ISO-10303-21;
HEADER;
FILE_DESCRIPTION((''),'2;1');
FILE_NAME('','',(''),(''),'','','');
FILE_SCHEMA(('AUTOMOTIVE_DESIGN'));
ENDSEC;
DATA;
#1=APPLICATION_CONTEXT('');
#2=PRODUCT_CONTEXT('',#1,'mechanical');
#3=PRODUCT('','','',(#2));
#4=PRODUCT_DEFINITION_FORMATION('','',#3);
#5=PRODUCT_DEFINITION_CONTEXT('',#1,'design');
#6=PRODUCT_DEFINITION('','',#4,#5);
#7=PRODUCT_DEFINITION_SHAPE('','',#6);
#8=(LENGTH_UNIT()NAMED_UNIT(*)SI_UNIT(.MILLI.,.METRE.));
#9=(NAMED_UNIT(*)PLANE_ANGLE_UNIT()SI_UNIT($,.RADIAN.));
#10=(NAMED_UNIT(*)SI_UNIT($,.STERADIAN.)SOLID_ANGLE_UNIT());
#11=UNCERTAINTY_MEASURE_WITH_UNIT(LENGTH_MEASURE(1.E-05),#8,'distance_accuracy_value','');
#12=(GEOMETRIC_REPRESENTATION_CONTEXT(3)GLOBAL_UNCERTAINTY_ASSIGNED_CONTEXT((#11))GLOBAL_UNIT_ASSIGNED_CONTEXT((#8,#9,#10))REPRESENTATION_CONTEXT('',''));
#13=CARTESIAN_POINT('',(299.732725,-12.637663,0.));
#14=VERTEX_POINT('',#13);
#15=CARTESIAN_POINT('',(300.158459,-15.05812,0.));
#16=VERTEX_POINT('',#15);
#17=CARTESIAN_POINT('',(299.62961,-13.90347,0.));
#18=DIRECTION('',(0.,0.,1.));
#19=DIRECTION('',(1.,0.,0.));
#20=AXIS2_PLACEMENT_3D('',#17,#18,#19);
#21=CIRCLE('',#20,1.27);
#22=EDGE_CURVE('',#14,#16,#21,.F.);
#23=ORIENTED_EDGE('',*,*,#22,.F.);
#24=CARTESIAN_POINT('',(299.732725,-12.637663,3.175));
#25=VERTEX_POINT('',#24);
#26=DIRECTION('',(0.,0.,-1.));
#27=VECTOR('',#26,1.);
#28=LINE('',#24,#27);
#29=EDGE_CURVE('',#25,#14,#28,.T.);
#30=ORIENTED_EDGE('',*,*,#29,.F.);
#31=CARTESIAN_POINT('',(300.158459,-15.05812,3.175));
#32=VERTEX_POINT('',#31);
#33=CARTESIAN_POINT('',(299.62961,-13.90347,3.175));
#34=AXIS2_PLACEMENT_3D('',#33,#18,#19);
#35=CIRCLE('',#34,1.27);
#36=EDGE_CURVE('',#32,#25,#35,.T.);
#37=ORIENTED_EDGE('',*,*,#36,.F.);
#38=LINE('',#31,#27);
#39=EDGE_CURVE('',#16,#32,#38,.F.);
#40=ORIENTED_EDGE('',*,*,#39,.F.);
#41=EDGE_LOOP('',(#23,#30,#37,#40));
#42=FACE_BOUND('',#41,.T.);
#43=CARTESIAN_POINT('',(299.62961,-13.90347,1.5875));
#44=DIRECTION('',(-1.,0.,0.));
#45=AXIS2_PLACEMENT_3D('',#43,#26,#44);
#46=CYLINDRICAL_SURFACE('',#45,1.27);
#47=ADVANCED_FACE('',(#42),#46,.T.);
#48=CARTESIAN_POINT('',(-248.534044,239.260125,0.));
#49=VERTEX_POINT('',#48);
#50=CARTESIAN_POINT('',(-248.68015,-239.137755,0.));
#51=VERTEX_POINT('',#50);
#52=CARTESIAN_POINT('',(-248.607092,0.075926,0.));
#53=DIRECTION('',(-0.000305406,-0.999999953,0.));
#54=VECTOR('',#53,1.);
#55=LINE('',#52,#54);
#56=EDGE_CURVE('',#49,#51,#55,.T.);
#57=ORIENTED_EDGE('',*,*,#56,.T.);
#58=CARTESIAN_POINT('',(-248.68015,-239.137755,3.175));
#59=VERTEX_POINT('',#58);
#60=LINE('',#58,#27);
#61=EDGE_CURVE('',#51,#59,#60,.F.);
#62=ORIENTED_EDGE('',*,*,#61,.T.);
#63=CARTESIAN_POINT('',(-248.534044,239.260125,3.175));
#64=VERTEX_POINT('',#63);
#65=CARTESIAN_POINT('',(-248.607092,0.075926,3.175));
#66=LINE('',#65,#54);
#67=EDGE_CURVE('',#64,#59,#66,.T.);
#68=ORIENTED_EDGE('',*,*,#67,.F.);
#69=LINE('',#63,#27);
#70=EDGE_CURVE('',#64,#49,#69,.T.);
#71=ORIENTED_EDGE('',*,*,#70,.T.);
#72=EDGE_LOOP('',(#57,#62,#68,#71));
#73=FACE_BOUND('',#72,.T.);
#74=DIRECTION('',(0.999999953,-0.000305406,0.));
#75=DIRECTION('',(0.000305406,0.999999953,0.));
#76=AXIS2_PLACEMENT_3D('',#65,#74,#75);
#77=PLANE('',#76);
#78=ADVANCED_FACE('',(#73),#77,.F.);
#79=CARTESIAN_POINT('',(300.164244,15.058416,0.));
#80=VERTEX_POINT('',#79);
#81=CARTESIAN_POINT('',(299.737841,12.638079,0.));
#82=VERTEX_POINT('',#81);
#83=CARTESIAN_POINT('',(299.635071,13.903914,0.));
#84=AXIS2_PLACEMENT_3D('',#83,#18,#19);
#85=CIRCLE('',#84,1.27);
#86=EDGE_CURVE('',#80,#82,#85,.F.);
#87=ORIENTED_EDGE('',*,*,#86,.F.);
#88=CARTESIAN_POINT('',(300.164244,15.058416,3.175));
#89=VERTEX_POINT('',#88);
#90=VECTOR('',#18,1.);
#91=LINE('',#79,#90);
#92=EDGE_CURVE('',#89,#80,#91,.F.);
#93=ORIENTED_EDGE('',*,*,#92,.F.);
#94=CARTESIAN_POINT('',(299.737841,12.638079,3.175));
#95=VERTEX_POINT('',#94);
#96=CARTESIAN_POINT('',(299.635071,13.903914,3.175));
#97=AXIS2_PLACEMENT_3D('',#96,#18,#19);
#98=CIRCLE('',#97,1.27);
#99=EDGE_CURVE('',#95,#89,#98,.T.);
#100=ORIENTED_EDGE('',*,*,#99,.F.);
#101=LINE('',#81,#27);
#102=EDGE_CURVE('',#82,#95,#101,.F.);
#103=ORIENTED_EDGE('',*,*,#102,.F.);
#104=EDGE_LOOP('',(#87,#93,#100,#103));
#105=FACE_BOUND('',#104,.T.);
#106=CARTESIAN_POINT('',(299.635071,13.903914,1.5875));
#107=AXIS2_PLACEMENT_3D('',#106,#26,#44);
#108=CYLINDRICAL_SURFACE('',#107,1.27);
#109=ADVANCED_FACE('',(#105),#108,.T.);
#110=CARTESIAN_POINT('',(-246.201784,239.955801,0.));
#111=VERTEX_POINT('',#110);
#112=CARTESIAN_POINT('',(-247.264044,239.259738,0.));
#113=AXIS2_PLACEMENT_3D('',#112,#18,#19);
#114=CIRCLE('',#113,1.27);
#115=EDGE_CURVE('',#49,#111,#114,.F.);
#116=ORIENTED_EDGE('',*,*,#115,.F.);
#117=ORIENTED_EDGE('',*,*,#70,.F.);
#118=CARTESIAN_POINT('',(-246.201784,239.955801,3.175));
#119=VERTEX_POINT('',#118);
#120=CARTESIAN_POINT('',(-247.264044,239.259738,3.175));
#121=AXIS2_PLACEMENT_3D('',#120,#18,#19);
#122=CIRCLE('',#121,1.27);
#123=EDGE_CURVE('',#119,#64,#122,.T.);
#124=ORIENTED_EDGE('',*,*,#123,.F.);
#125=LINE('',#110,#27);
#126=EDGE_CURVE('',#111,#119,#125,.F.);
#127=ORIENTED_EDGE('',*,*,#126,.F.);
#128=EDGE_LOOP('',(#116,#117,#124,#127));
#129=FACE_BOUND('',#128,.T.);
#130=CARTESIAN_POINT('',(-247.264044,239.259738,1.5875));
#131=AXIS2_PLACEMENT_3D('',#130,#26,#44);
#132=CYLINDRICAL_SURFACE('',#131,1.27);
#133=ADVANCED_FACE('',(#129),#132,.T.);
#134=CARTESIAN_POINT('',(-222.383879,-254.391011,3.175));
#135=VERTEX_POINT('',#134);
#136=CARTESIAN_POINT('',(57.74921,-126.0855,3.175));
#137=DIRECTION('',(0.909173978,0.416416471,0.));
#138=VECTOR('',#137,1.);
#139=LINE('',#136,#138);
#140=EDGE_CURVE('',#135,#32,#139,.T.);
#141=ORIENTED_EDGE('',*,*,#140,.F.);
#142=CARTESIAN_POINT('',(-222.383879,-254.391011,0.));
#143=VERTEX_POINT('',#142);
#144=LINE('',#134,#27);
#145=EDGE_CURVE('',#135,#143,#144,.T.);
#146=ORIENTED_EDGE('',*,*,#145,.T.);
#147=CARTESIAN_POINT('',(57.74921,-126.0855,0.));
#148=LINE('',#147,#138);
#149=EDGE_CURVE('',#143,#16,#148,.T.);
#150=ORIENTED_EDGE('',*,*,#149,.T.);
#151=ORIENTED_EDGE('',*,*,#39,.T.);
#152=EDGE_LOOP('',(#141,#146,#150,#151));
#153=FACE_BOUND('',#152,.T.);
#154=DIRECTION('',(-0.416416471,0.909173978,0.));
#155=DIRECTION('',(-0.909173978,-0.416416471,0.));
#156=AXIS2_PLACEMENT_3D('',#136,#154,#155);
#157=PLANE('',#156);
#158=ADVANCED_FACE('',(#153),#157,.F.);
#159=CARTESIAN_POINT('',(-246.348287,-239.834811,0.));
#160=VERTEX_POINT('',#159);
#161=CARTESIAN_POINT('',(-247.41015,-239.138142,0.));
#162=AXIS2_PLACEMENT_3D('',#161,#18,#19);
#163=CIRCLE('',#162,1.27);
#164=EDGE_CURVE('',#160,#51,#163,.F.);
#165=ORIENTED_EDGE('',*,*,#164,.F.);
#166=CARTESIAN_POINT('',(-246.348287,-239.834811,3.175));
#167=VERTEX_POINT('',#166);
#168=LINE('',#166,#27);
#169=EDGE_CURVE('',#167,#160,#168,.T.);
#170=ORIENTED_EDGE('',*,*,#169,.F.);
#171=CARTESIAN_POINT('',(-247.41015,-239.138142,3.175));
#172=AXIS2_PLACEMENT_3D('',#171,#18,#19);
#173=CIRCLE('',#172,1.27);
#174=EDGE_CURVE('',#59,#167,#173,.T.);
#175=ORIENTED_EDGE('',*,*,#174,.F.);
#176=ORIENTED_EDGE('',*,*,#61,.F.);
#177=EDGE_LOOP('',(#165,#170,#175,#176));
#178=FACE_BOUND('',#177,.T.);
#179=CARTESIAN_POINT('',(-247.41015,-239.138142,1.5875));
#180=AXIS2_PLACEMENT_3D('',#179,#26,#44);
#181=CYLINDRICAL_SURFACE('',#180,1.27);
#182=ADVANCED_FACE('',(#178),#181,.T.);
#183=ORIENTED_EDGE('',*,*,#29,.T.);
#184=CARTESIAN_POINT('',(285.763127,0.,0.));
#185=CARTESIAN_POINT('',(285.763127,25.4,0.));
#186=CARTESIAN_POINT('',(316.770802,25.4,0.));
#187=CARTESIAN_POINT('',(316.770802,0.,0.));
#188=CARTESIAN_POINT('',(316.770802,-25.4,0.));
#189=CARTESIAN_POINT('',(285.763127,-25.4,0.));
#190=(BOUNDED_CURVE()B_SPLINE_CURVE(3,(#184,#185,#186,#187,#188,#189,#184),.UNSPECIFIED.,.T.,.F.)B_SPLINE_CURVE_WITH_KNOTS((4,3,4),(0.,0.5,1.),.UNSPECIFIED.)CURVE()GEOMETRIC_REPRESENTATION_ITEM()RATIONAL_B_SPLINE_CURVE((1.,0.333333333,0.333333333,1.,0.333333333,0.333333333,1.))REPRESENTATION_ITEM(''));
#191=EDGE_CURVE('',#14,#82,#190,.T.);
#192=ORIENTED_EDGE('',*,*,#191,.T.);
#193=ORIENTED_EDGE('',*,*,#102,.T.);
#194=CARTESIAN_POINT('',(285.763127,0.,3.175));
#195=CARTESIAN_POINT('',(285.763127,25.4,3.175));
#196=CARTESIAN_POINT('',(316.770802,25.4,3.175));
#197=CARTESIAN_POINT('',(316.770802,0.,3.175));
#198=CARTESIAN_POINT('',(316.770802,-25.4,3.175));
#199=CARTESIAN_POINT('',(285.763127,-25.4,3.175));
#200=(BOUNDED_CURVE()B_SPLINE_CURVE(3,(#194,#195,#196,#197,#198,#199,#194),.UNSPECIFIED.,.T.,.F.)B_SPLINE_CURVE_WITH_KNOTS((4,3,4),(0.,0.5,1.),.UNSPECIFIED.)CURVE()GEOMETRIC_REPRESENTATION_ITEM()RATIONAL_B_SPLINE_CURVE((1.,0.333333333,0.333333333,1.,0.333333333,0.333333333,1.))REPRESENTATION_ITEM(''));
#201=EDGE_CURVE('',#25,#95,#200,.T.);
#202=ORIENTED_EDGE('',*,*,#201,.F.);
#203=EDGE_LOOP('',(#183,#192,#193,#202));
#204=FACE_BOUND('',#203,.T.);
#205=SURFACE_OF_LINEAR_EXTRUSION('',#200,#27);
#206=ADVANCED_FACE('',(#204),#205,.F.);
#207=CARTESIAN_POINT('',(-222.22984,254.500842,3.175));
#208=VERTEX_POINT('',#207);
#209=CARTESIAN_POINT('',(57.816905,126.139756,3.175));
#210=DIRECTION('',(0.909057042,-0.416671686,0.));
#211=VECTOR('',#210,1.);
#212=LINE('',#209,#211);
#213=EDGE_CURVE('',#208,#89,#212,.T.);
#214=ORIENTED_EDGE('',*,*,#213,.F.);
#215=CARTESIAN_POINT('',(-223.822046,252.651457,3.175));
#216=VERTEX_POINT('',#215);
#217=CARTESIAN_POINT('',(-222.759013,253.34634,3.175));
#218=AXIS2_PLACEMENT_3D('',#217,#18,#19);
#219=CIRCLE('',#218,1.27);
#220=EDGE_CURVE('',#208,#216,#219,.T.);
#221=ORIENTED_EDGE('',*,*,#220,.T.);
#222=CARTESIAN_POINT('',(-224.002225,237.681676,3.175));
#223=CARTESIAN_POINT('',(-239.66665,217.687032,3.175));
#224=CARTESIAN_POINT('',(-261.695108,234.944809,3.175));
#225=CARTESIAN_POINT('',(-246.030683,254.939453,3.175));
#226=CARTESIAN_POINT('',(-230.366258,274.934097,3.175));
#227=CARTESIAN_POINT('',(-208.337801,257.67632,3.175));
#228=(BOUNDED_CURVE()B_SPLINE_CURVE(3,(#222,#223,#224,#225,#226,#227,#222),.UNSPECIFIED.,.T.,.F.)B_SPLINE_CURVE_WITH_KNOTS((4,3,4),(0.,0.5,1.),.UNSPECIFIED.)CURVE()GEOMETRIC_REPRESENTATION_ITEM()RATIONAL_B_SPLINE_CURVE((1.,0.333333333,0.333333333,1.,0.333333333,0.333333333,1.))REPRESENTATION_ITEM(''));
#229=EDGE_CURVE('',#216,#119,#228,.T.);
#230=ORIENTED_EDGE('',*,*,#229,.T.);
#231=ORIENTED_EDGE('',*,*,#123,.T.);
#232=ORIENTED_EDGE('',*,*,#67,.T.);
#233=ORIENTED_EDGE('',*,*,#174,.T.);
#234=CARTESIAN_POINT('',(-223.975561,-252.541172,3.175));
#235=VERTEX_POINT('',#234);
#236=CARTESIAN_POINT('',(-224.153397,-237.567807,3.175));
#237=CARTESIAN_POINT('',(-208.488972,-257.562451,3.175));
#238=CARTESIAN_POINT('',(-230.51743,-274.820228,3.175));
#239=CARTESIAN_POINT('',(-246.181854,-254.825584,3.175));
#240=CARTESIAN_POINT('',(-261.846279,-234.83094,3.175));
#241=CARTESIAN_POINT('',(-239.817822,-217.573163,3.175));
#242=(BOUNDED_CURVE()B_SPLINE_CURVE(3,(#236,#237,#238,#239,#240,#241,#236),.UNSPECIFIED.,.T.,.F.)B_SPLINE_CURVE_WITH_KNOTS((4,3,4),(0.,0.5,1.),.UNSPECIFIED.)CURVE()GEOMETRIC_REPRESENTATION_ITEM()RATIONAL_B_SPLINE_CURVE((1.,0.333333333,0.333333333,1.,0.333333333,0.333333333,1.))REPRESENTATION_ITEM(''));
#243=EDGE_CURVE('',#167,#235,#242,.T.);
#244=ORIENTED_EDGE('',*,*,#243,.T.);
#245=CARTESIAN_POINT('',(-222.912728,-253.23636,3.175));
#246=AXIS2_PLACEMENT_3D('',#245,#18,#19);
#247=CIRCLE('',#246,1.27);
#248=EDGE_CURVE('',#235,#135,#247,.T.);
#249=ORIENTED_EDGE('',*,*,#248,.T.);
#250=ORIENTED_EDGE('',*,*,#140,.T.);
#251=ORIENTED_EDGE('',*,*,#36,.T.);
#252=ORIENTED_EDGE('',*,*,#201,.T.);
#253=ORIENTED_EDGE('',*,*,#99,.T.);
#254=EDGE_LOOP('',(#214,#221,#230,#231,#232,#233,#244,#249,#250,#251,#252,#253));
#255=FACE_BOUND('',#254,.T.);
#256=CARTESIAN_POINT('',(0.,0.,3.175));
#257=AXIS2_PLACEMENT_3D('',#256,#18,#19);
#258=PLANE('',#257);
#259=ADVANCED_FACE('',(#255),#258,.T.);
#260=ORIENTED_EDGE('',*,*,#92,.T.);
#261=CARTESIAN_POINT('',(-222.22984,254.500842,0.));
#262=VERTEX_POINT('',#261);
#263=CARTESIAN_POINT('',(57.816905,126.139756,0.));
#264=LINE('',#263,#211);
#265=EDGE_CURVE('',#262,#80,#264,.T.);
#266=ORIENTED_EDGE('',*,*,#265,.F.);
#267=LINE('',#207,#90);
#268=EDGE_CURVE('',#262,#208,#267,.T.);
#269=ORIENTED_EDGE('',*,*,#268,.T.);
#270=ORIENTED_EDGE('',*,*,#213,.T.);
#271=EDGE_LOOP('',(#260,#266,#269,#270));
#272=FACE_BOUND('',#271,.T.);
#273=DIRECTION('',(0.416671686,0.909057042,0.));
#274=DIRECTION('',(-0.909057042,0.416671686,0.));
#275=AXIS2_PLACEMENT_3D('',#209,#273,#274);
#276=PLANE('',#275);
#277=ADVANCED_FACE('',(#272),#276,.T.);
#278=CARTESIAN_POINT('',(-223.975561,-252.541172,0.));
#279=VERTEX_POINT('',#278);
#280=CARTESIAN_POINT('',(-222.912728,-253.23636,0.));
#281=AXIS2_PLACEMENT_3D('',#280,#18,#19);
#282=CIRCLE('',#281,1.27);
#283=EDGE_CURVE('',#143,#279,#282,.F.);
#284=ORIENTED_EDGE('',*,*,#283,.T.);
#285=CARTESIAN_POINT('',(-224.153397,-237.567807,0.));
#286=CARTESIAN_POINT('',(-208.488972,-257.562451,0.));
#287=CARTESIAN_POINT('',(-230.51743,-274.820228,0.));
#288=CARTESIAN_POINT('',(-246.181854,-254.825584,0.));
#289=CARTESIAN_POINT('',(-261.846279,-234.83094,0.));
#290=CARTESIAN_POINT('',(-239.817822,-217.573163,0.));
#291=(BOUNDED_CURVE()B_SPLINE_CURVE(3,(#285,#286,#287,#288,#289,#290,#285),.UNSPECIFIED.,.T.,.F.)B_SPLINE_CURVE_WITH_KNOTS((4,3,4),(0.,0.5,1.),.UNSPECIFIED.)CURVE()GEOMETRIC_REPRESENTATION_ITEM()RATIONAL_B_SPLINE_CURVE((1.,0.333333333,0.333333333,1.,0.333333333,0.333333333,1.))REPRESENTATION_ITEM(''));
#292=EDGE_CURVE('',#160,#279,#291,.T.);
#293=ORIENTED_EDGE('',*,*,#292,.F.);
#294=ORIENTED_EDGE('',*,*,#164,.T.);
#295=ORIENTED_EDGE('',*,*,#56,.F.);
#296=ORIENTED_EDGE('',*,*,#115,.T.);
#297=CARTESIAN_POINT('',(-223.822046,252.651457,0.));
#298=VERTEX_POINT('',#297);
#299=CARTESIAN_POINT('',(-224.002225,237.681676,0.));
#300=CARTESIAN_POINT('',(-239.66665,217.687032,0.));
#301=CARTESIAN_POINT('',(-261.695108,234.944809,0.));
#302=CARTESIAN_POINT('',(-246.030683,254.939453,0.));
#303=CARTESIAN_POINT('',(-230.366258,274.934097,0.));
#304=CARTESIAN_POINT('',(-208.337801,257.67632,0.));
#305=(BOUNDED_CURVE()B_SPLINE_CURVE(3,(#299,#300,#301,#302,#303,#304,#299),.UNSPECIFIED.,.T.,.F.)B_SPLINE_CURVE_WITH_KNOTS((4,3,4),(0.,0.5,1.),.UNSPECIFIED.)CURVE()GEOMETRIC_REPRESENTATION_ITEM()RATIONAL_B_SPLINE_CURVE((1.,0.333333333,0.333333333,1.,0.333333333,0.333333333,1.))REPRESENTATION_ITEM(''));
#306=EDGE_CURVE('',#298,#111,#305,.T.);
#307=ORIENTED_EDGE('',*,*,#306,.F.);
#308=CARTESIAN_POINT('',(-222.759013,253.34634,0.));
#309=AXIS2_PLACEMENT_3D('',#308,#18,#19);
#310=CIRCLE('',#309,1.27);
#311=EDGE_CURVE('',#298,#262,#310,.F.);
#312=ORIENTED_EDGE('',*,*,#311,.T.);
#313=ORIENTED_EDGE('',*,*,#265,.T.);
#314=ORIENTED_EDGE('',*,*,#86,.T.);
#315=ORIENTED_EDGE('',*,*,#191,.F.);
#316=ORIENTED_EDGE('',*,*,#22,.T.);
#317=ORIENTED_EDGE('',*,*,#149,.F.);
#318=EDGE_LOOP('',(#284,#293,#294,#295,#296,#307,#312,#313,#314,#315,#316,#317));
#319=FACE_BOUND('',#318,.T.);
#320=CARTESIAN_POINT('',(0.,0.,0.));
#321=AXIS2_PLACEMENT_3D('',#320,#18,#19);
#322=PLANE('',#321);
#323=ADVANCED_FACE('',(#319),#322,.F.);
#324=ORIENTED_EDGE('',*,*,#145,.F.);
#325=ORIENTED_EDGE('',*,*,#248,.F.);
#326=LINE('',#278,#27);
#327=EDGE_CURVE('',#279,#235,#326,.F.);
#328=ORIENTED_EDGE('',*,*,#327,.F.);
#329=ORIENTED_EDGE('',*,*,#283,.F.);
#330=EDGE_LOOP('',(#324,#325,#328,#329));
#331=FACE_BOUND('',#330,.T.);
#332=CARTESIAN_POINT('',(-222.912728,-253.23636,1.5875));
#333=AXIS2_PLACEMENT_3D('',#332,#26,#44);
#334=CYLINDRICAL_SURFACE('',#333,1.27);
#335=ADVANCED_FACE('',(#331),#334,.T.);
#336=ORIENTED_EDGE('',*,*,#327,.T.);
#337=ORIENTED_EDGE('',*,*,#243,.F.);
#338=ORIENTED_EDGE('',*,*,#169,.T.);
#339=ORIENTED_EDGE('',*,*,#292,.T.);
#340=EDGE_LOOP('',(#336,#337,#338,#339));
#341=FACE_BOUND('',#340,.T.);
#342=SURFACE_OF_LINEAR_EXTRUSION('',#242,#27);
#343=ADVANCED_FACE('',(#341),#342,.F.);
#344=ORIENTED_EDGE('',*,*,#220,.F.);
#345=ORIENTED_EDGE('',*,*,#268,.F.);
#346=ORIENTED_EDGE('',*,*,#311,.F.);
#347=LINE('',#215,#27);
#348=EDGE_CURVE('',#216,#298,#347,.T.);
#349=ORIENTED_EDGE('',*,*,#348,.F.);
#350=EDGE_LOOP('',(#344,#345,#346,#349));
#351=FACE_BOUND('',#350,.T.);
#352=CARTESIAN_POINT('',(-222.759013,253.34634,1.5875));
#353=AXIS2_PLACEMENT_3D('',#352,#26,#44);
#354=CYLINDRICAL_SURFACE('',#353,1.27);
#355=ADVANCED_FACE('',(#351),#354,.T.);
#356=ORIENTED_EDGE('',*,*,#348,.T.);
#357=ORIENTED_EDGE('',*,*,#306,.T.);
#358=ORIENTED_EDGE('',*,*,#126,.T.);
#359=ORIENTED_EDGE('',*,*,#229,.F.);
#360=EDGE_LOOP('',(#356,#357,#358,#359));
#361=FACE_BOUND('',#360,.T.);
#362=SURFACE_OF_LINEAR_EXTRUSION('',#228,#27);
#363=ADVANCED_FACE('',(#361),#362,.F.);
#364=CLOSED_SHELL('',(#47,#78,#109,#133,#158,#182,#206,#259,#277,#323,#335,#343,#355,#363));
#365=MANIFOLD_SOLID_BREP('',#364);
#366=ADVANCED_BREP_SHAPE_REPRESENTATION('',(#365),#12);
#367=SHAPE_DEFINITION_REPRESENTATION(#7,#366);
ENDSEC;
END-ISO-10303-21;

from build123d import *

# Parameters (mm, degrees)
BOSS_EXTRUDE1_DEPTH = 3.175
FILLET1_R           = 1.27


with BuildPart() as part:
    # Sketch2 → Boss-Extrude1 (new body)
    with BuildSketch(Plane.XY):
        with BuildLine():
            add(Edge.make_bspline(
                [(-224.002225489, 237.681676079), (-232.004852581, 227.466830346), (-248.536961255, 229.708235903), (-248.531511338, 247.553045118)],
                knots=[0, 0, 0, 0, 0.379035755, 0.379035755, 0.379035755, 0.379035755], degree=3, weights=[1, 0.494618994, 0.37235293, 0.633201808]))
            Line((-248.531511338, 247.553045118), (-248.68268269, -247.431362977))
            add(Edge.make_bspline(
                [(-248.68268269, -247.431362977), (-248.677234709, -229.592890963), (-232.152010305, -227.358084205), (-224.153396841, -237.567806796)],
                knots=[0.621058297, 0.621058297, 0.621058297, 0.621058297, 1, 1, 1, 1], degree=3, weights=[0.633007703, 0.37241363, 0.494744396, 1]))
            add(Edge.make_bspline(
                [(-224.153396841, -237.567806796), (-219.422565419, -243.606412946), (-220.040878469, -253.31787844), (-230.404432953, -258.064554967)],
                knots=[0, 0, 0, 0, 0.282425472, 0.282425472, 0.282425472, 0.282425472], degree=3, weights=[1, 0.623432704, 0.459569801, 0.50841129]))
            Line((-230.404432953, -258.064554967), (308.83327514, -11.084913444))
            add(Edge.make_bspline(
                [(308.83327514, -11.084913444), (295.43695815, -17.220644529), (285.763127193, -9.203898597), (285.763127193, 0)],
                knots=[0.684854095, 0.684854095, 0.684854095, 0.684854095, 1, 1, 1, 1], degree=3, weights=[0.533951912, 0.424456097, 0.57980546, 1]))
            add(Edge.make_bspline(
                [(285.763127193, 0), (285.763127193, 9.206022551), (295.440494393, 17.223574641), (308.837548746, 11.082955337)],
                knots=[0, 0, 0, 0, 0.315188067, 0.315188067, 0.315188067, 0.315188067], degree=3, weights=[1, 0.579749243, 0.424414534, 0.533995873]))
            Line((308.837548746, 11.082955337), (-230.249394824, 258.176652546))
            add(Edge.make_bspline(
                [(-230.249394824, 258.176652546), (-219.88947652, 253.42812256), (-219.272438092, 243.718949596), (-224.002225489, 237.681676079)],
                knots=[0.717613388, 0.717613388, 0.717613388, 0.717613388, 1, 1, 1, 1], degree=3, weights=[0.508391141, 0.459614898, 0.623484517, 1]))
        make_face()
    extrude(amount=BOSS_EXTRUDE1_DEPTH)

    # Fillet1
    fillet1_edges = [part.edges().sort_by_distance(p)[0] for p in [
        (-230.249394824, 258.176652546, 1.5875),
    ]]
    fillet(fillet1_edges, radius=FILLET1_R)
    fillet1_2_edges = [part.edges().sort_by_distance(p)[0] for p in [
        (-248.531511338, 247.553045118, 1.5875),
    ]]
    fillet(fillet1_2_edges, radius=FILLET1_R)
    fillet1_3_edges = [part.edges().sort_by_distance(p)[0] for p in [
        (-230.404432953, -258.064554967, 1.5875),
    ]]
    fillet(fillet1_3_edges, radius=FILLET1_R)
    fillet1_4_edges = [part.edges().sort_by_distance(p)[0] for p in [
        (308.837548746, 11.082955337, 1.5875),
    ]]
    fillet(fillet1_4_edges, radius=FILLET1_R)
    fillet1_5_edges = [part.edges().sort_by_distance(p)[0] for p in [
        (-248.68268269, -247.431362977, 1.5875),
    ]]
    fillet(fillet1_5_edges, radius=FILLET1_R)
    # the kernel refuses this fillet: 1.27 mm, written as the material it takes off along each edge
    with BuildSketch(Plane(origin=(308.833274988, -11.084913514, -23.853565642), x_dir=(-0.909173978372099, -0.4164164706769535, 0), z_dir=(0, 0, 1))) as fillet1_6_piece_1:
        with BuildLine():
            CenterArc((9.54142609, -1.27), FILLET1_R, 90, 150.734300738)
            Line((8.920573521, -2.377899855), (8.908156469, -2.400057852))
            ThreePointArc((8.908156469, -2.400057852), (4.606653366, -0.645600152), (0, -0.0254))
            Line((0, -0.0254), (0, 0.0254))
            Line((0, 0.0254), (9.54142609, 0.0254))
            Line((9.54142609, 0.0254), (9.54142609, 0))
        make_face()
    extrude(amount=50.882131284, mode=Mode.SUBTRACT)


solid = part.part
